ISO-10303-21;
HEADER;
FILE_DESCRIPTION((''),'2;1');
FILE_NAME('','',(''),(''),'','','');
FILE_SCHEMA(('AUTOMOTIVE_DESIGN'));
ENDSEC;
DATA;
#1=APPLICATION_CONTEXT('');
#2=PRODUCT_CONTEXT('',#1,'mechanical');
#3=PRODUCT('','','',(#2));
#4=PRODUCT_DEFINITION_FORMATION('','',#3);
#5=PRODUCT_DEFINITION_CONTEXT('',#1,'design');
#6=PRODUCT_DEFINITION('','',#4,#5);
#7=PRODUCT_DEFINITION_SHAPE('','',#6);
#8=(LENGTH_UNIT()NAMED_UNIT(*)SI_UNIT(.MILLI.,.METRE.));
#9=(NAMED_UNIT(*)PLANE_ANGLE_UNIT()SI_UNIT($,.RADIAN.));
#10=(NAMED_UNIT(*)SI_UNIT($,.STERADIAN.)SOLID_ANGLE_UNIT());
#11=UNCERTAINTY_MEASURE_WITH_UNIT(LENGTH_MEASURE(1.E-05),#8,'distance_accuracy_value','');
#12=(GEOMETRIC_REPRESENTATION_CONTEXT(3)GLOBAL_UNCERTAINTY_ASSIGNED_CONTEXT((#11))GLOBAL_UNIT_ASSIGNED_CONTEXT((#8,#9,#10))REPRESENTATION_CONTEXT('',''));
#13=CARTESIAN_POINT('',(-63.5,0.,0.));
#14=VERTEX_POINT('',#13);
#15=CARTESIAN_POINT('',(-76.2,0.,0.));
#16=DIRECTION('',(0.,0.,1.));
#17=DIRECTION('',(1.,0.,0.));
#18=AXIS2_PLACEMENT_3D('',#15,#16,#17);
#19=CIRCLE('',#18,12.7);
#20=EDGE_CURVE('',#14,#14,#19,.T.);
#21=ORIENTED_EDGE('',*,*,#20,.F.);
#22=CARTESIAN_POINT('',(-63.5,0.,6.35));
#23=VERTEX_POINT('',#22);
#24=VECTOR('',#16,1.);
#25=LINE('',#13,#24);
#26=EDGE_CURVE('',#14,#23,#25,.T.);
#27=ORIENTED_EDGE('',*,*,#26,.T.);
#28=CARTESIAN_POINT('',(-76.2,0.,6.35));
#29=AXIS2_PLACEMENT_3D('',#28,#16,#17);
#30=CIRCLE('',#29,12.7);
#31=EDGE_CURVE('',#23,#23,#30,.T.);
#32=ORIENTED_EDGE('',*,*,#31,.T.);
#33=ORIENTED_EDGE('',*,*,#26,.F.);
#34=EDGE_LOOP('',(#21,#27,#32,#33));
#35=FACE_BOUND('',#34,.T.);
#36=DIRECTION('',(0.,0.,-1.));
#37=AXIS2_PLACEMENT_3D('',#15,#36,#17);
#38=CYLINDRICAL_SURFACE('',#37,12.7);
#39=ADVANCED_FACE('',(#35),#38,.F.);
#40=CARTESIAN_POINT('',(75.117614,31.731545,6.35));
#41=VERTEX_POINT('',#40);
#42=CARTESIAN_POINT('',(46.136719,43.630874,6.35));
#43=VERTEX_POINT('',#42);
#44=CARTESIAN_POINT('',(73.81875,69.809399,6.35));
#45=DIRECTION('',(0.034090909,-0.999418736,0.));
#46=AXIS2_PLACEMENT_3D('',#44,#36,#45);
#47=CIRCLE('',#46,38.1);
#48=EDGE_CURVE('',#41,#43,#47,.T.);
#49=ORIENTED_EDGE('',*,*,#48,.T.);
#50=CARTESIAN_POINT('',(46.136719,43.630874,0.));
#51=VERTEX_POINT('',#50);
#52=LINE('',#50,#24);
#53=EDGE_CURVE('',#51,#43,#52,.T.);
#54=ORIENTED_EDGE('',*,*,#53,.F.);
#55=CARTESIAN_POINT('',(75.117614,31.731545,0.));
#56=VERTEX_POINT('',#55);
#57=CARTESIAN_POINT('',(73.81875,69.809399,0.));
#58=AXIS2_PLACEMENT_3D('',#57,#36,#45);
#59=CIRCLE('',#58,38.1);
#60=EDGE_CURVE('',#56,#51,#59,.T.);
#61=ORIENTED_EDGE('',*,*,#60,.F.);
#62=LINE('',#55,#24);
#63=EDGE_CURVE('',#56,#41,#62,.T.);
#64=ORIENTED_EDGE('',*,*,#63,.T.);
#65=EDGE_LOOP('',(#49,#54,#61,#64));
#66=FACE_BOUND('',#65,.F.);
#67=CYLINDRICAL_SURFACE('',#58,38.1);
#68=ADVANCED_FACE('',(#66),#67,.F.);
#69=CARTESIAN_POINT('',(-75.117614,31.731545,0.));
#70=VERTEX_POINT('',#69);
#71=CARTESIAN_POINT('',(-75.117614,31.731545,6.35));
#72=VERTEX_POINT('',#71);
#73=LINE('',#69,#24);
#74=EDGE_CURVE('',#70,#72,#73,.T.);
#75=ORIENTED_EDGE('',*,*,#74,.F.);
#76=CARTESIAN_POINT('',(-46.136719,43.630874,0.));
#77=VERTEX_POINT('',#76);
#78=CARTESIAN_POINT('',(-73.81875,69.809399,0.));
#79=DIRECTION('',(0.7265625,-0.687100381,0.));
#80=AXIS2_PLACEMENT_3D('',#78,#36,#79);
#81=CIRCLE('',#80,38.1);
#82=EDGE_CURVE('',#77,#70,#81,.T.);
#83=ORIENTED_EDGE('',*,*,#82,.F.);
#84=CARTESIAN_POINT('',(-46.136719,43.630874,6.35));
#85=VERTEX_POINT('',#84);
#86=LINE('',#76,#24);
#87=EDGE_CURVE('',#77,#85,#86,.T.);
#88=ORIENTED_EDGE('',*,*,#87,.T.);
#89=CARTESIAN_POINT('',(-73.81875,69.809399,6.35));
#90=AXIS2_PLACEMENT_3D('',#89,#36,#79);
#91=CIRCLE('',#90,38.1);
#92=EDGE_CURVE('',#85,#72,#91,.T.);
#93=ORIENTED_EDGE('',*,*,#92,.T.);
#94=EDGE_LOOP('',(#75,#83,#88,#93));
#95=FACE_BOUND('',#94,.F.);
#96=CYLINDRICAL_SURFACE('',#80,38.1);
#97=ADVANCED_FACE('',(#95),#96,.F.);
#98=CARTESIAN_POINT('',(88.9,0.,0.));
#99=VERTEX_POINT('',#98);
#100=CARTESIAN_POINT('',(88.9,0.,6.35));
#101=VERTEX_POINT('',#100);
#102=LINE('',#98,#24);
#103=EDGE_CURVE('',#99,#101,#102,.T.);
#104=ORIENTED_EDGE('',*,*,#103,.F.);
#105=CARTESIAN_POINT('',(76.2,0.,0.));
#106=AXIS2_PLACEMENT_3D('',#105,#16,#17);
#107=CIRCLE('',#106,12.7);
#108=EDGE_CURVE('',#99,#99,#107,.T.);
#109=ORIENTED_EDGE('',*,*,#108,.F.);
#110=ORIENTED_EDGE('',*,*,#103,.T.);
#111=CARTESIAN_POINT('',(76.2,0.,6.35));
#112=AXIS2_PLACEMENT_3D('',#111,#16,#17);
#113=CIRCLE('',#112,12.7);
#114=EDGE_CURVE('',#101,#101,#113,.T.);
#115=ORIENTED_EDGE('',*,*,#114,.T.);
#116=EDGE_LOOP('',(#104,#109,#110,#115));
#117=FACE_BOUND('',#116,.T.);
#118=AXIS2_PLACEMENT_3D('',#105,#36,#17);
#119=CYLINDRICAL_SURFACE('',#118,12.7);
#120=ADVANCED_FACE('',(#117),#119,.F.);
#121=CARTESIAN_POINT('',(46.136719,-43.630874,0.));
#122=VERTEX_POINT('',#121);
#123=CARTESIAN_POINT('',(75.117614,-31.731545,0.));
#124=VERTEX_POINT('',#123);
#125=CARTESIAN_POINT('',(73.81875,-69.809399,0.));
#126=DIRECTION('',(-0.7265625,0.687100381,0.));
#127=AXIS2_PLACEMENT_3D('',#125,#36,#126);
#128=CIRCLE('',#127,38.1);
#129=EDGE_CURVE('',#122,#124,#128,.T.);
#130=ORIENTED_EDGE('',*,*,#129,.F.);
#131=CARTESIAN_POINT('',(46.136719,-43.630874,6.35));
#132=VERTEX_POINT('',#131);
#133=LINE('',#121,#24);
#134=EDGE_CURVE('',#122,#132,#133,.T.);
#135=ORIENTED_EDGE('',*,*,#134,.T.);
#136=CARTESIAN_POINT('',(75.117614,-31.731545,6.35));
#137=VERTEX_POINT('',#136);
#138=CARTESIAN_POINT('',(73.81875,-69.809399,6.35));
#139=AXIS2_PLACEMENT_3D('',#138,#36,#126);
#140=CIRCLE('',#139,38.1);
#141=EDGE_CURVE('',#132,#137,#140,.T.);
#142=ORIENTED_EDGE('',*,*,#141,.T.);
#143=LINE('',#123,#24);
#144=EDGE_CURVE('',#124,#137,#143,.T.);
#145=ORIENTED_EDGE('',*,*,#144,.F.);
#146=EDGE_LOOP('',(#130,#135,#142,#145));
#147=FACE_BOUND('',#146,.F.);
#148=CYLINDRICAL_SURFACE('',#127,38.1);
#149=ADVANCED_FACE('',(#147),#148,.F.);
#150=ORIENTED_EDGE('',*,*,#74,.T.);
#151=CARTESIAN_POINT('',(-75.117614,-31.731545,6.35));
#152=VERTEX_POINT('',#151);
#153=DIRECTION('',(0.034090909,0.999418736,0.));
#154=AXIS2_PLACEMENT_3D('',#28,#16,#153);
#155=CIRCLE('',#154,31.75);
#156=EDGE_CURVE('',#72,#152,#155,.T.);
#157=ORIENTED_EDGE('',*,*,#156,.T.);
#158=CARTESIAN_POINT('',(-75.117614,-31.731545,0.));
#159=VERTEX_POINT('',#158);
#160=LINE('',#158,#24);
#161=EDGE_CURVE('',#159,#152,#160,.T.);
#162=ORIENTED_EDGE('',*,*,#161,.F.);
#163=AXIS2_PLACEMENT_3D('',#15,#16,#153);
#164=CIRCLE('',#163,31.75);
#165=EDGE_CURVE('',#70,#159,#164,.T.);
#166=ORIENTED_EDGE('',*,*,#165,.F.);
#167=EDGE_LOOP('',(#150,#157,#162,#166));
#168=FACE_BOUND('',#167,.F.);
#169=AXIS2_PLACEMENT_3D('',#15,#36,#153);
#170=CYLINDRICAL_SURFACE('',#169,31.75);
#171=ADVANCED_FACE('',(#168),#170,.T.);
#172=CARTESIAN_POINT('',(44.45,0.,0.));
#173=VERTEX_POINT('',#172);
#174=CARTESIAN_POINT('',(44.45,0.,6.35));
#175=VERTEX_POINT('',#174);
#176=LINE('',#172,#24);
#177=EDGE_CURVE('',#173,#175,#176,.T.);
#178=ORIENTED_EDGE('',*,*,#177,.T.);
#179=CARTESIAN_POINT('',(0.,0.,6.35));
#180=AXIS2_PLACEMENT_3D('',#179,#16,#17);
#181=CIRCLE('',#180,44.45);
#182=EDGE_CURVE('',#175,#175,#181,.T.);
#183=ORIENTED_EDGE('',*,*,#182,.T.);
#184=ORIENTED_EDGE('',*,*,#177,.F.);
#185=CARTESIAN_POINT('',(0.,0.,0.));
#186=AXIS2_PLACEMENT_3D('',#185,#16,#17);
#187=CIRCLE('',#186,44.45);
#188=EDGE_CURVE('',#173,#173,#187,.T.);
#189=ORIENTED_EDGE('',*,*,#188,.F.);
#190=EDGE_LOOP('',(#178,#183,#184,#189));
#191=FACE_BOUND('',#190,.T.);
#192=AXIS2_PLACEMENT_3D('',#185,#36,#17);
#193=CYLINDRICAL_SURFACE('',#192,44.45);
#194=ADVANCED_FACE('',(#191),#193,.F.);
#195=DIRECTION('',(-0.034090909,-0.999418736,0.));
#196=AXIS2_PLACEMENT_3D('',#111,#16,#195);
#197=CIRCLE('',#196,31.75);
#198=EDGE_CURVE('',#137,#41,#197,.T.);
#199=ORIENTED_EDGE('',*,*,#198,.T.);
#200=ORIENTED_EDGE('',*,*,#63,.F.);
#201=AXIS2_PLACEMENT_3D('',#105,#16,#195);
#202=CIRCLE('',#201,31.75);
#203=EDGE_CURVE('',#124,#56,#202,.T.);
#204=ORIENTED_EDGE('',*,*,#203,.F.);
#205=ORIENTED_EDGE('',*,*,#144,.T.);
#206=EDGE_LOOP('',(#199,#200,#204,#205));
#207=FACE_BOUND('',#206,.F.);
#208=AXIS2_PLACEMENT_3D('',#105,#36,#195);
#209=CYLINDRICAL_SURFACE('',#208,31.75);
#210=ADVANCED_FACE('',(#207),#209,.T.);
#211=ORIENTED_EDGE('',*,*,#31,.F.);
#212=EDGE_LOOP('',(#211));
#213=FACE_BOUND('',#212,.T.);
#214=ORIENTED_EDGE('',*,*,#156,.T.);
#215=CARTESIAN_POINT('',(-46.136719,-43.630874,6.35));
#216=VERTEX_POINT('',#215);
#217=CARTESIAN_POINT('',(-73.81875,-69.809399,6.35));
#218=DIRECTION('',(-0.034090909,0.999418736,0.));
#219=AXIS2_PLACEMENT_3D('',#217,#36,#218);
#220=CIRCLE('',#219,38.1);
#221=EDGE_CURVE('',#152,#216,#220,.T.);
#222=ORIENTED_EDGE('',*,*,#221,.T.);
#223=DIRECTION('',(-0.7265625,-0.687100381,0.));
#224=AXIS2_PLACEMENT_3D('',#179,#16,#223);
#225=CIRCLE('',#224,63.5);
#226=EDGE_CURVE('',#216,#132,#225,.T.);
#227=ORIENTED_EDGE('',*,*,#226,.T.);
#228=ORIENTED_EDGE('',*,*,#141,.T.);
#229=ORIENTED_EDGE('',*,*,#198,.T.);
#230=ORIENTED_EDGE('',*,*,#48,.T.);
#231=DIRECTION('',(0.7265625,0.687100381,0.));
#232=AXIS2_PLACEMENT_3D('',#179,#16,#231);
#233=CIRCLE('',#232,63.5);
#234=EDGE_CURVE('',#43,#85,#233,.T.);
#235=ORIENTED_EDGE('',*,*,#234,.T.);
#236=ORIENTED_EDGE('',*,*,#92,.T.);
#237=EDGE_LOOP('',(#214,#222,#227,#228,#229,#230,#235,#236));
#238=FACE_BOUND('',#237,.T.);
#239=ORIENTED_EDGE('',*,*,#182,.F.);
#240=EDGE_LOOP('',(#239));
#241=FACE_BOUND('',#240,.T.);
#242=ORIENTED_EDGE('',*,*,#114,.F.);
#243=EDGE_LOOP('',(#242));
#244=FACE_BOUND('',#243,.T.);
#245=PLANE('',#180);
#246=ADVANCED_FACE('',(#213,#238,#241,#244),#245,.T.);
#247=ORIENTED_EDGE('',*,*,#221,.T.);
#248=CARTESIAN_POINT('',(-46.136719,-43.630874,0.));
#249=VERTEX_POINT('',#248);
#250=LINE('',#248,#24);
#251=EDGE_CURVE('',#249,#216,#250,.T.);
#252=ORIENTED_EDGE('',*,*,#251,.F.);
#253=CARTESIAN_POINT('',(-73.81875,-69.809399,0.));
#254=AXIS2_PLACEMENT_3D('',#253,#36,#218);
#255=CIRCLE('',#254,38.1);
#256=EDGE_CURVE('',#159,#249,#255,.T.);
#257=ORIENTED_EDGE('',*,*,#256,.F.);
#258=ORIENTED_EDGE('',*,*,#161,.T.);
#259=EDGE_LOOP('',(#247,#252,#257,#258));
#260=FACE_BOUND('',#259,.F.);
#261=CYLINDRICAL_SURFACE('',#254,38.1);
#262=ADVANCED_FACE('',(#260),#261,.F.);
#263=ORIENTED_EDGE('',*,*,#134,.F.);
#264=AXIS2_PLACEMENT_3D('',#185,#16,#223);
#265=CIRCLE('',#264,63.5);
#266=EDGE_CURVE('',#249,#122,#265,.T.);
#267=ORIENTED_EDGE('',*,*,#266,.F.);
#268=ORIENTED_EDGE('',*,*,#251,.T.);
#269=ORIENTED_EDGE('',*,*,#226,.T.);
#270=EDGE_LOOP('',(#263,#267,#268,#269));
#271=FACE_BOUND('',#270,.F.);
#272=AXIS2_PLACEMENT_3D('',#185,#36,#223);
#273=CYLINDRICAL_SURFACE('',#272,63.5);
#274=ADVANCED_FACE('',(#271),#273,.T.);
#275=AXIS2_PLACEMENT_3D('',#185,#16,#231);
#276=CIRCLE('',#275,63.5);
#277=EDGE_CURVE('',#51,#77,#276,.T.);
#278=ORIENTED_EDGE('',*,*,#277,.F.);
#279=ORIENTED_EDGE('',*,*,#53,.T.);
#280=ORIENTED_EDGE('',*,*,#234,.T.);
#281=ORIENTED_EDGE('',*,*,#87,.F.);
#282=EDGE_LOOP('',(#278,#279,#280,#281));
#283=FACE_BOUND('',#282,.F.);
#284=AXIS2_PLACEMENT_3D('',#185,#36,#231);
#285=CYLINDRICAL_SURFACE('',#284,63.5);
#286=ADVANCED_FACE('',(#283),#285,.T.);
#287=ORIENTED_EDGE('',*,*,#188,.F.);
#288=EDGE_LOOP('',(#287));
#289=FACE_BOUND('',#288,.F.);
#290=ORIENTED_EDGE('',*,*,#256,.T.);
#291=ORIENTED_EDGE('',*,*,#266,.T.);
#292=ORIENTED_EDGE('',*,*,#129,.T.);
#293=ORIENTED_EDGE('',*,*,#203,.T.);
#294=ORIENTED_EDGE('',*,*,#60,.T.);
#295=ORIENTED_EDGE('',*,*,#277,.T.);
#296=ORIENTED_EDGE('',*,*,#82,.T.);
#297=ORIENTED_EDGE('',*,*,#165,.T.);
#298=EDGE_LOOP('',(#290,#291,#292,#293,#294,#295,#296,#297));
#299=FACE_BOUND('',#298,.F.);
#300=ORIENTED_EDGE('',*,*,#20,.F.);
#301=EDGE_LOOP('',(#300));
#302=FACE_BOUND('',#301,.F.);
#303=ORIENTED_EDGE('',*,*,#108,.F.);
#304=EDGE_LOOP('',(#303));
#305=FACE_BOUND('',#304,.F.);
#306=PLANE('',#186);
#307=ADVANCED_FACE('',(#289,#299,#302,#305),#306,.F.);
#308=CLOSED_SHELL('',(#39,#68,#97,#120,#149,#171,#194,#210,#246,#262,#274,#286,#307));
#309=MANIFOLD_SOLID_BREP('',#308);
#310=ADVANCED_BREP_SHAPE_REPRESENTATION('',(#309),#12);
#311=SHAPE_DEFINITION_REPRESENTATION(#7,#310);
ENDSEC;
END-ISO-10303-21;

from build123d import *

# Parameters (mm, degrees)
F0_R     = 12.7
F0_R_2   = 44.45
F1_DEPTH = 6.35
F2_DEPTH = 254


# Not quite as in the source:
# - an extrude ends at something that could not be found from the text; its depth is read off the source's solid


with BuildPart() as f1:
    # F0 (on Top) → F1 (new body)
    with BuildSketch(Plane.XY):
        with BuildLine():
            ThreePointArc((75.1176136364, 31.7315448688), (59.3475236203, 34.5646316236), (46.13671875, 43.6308741946))
            ThreePointArc((46.13671875, 43.6308741946), (0, 63.5), (-46.13671875, 43.6308741946))
            ThreePointArc((-46.13671875, 43.6308741946), (-59.3475236203, 34.5646316236), (-75.1176136364, 31.7315448688))
            ThreePointArc((-75.1176136364, 31.7315448688), (-107.95, 0), (-75.1176136364, -31.7315448688))
            ThreePointArc((-75.1176136364, -31.7315448688), (-59.3475236203, -34.5646316236), (-46.13671875, -43.6308741946))
            ThreePointArc((-46.13671875, -43.6308741946), (0, -63.5), (46.13671875, -43.6308741946))
            ThreePointArc((46.13671875, -43.6308741946), (59.3475236203, -34.5646316236), (75.1176136364, -31.7315448688))
            ThreePointArc((75.1176136364, -31.7315448688), (107.95, 0), (75.1176136364, 31.7315448688))
        make_face()
        with Locations((-76.2, 0)):
            Circle(F0_R, mode=Mode.SUBTRACT)
        Circle(F0_R_2, mode=Mode.SUBTRACT)
        with Locations((76.2, 0)):
            Circle(F0_R, mode=Mode.SUBTRACT)
    extrude(amount=F1_DEPTH)

    # F0 (on Top) → F2 (cut, through all)
    with BuildSketch(Plane.XY):
        Circle(F0_R_2)
    extrude(amount=-F2_DEPTH, mode=Mode.SUBTRACT)


solid = f1.part
